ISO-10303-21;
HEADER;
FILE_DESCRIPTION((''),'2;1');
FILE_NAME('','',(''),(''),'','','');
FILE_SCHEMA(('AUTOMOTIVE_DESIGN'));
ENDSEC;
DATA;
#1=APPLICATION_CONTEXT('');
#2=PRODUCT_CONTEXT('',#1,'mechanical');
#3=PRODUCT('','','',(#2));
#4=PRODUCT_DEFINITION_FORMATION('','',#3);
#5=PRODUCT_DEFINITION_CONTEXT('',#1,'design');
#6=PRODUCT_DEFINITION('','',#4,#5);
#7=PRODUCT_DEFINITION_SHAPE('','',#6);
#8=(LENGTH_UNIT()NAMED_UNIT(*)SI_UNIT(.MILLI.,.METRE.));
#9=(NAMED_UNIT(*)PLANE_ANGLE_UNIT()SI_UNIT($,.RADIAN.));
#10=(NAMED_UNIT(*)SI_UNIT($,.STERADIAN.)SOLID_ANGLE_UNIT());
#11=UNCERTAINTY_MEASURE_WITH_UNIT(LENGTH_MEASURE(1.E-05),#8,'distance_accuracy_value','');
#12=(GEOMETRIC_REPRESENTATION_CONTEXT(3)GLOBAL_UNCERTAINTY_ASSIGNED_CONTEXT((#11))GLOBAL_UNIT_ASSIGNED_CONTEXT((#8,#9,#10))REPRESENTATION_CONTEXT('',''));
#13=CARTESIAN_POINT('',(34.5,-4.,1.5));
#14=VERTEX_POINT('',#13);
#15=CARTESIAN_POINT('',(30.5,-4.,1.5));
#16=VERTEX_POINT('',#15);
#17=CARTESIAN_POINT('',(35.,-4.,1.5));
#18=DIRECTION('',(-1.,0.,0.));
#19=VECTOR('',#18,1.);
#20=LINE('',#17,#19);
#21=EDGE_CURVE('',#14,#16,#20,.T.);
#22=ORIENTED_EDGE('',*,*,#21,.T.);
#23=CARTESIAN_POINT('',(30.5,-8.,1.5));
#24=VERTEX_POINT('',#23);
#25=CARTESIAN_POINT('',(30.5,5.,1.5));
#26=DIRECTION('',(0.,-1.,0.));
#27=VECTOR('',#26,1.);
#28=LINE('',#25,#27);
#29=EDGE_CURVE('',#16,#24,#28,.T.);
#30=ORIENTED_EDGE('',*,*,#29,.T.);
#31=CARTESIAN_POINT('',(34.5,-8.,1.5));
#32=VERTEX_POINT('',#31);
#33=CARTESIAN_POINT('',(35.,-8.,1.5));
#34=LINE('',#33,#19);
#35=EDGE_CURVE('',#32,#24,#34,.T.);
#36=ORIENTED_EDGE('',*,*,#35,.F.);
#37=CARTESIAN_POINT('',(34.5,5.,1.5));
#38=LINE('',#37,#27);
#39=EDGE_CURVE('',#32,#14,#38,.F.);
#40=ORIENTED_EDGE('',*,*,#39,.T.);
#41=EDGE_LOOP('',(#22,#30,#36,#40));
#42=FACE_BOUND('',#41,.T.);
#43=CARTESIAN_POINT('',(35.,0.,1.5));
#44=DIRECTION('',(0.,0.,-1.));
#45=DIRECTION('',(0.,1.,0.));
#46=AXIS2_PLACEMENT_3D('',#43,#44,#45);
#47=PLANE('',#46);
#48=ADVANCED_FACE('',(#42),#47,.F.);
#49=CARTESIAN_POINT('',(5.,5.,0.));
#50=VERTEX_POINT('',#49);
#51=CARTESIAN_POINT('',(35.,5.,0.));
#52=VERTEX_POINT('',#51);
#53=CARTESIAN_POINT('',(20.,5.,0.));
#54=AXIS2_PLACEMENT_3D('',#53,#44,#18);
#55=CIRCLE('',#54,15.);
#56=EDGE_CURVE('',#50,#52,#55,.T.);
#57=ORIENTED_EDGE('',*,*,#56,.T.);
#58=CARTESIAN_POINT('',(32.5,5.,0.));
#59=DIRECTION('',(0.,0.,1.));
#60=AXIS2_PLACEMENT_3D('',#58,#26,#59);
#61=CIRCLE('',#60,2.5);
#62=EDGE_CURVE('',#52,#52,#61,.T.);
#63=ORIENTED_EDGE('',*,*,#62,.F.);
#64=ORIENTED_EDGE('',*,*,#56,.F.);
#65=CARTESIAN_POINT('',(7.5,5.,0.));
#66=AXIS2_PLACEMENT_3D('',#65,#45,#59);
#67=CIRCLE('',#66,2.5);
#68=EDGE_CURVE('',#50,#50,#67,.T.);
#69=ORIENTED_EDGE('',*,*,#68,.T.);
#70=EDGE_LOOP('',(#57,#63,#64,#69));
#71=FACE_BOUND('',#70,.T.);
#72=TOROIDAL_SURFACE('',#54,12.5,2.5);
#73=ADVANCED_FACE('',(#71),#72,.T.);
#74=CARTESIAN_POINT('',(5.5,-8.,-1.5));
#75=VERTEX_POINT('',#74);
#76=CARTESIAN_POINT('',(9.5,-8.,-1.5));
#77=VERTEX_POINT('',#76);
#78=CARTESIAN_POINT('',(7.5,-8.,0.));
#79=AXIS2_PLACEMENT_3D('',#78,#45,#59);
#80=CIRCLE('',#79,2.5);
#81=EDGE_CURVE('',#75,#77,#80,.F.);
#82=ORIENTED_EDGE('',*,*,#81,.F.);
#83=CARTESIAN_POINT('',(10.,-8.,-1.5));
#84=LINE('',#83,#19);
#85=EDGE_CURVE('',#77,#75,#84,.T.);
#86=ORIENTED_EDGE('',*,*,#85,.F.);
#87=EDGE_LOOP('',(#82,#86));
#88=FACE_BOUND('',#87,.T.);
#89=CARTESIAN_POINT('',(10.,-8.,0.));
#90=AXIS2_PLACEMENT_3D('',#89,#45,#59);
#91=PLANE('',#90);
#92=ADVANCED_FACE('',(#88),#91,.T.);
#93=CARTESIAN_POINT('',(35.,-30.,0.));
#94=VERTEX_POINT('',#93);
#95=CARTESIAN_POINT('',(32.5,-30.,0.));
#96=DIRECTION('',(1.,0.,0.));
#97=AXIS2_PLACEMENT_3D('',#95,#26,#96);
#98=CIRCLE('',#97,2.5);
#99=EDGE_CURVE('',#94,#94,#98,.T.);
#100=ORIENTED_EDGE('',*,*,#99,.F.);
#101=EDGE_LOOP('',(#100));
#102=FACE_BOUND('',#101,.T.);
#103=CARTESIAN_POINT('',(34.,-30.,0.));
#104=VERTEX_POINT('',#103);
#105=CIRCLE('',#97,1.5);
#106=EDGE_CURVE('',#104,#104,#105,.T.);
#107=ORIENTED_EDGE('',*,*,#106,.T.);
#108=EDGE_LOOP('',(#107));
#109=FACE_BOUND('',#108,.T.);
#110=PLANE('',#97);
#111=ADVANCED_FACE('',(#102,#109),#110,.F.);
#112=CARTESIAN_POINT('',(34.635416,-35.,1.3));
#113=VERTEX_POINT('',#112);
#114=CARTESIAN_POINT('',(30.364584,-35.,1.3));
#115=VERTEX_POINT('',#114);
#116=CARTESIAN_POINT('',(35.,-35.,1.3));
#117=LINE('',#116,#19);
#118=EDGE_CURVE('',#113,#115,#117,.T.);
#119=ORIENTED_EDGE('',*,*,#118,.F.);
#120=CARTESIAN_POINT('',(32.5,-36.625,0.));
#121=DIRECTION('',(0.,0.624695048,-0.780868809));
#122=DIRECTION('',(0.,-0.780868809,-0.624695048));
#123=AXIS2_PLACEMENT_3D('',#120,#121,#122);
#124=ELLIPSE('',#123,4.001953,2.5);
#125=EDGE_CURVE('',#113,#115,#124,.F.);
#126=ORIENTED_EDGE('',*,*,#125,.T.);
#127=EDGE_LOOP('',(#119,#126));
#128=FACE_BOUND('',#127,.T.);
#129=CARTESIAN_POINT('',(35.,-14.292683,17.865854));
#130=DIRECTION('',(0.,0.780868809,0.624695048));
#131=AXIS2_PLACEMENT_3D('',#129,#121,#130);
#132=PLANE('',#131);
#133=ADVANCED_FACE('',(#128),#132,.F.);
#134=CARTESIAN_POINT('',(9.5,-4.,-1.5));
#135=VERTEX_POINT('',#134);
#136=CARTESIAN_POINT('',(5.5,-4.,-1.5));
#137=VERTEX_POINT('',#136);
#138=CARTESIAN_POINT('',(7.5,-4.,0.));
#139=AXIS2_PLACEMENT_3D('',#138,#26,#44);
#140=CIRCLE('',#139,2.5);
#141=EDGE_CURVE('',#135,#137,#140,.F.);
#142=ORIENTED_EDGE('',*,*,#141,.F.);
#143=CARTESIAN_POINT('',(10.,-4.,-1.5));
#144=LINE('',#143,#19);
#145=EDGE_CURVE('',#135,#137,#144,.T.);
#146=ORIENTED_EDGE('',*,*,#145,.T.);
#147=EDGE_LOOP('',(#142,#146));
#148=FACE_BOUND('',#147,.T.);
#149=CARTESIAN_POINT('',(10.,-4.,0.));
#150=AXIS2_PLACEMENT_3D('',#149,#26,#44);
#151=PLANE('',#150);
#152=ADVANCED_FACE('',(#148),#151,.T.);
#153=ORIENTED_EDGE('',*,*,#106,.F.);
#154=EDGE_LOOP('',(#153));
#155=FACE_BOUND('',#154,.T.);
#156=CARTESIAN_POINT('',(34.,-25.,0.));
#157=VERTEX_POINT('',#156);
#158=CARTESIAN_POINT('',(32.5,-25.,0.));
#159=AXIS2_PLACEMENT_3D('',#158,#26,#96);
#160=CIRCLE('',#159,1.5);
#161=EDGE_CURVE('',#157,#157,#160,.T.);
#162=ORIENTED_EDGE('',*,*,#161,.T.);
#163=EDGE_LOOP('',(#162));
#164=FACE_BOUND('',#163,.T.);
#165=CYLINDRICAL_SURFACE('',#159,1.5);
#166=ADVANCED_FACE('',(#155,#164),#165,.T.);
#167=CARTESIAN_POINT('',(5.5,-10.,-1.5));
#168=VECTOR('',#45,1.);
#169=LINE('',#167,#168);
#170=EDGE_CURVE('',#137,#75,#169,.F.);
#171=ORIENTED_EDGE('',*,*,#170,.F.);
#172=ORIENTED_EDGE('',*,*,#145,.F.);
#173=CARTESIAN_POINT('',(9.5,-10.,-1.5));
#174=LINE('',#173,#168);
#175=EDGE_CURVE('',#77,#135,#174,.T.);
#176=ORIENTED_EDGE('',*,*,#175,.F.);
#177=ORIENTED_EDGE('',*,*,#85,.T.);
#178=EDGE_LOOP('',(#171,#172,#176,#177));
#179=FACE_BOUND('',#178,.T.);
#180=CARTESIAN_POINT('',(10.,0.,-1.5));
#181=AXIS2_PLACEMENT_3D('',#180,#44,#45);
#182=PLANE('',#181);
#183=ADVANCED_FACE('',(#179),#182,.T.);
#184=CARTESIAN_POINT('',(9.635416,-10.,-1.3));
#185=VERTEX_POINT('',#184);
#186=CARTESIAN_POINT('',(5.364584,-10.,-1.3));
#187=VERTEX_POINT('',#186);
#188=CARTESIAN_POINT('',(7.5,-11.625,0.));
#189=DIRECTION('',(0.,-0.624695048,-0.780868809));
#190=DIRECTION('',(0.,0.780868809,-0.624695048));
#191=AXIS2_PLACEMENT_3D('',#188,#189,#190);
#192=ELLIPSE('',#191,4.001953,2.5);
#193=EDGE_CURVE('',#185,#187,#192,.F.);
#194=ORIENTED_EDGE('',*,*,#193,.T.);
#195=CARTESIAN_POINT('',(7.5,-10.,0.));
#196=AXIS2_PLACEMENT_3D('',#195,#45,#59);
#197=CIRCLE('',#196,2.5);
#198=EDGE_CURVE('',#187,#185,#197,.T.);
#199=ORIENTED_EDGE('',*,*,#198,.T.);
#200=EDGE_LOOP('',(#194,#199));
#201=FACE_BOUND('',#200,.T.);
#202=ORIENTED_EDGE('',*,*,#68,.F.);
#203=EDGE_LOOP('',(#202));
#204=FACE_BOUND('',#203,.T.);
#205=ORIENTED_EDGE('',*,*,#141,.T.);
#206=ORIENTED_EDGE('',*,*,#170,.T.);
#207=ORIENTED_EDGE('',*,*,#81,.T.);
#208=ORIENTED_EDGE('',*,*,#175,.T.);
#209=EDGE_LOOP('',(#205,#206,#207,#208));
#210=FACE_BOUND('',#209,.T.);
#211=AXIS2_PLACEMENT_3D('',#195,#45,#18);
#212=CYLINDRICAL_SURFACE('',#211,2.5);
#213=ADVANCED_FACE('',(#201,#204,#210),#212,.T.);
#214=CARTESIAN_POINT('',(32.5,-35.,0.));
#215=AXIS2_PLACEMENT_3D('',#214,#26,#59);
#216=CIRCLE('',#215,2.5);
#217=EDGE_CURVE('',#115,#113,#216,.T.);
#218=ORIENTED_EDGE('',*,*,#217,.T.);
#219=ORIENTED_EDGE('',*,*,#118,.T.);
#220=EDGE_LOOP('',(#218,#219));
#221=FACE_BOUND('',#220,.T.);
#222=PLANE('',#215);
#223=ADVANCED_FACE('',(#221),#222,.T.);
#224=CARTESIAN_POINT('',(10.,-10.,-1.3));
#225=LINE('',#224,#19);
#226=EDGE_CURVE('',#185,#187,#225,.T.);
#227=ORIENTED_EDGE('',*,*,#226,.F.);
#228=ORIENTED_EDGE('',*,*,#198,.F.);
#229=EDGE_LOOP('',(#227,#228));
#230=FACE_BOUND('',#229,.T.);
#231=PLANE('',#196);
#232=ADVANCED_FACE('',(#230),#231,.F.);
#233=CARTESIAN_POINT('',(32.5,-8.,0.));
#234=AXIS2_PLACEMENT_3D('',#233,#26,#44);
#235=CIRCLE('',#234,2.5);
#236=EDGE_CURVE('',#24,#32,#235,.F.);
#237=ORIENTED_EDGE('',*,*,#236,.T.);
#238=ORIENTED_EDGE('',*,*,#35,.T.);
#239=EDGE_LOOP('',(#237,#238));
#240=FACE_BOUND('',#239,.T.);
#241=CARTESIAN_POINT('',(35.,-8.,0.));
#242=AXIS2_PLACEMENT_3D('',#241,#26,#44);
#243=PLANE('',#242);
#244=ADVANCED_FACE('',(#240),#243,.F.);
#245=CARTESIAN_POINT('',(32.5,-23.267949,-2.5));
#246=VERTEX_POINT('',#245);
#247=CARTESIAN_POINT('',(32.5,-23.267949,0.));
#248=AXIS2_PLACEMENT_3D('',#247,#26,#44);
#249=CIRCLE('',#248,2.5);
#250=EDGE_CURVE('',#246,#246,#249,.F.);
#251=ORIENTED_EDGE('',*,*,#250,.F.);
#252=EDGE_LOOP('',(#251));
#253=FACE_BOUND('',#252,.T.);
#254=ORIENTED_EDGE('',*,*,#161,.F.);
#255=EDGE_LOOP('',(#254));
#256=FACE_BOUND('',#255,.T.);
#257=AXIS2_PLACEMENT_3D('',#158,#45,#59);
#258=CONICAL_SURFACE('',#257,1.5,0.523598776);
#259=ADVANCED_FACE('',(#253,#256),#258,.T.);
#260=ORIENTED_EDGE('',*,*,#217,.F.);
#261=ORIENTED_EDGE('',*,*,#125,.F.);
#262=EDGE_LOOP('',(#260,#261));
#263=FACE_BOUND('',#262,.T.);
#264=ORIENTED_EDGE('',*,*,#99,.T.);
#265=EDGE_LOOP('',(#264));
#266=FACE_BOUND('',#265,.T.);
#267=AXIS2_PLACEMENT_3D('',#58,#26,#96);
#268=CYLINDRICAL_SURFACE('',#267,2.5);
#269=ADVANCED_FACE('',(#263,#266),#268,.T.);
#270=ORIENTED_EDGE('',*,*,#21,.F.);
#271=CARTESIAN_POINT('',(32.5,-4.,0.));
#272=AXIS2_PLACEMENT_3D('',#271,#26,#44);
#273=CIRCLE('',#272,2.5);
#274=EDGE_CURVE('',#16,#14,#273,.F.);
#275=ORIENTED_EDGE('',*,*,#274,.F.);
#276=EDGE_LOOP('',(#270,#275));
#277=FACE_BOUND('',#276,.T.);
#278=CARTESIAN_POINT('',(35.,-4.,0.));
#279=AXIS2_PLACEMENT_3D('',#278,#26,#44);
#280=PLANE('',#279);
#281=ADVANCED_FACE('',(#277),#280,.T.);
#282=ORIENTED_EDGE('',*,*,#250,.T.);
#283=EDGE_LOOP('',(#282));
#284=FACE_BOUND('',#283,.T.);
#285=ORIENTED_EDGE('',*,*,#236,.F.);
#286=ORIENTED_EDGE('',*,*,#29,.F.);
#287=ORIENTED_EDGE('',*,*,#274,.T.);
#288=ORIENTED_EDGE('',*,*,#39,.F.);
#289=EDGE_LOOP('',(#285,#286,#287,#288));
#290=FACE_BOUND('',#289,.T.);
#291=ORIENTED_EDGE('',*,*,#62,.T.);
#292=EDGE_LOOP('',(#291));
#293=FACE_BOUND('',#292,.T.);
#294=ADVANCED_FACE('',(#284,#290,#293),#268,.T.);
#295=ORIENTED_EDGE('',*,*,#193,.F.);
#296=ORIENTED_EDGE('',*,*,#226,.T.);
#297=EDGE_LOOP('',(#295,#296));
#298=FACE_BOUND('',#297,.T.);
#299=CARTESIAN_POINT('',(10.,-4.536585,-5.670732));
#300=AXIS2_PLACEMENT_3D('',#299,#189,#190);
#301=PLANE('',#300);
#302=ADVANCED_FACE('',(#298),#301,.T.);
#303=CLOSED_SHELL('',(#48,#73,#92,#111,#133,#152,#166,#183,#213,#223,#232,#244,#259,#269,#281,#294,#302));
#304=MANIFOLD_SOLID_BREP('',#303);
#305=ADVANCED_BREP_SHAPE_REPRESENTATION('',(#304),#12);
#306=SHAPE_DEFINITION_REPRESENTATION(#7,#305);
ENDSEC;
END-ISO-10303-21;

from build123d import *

# Parameters (mm, degrees)
SKETCH_3_R          = 2.5
SKETCH_4_W          = 7.512886461
SKETCH_4_H          = 4
CUT_EXTRUDE_1_DEPTH = 10
CUT_EXTRUDE_START   = 10
SKETCH_4_3_W        = 9.374325773
SKETCH_4_3_H        = 4
CUT_EXTRUDE_2_DEPTH = 40.56056908
CUT_EXTRUDE_START_2 = -5
SKETCH_5_R          = 2.5
SKETCH_5_R_2        = 1.5
CUT_EXTRUDE_3_DEPTH = 5
CHAMFER_1_SIZE2     = 1
CHAMFER_1_SIZE      = 1.732050808


with BuildPart() as part:
    # 스윕1: sweep along a path in 스케치2
    with BuildLine(Plane.XY) as sweep_1_path:
        Line((7.5, -10), (7.5, 5))
        ThreePointArc((7.5, 5), (20, 17.5), (32.5, 5))
        Line((32.5, 5), (32.5, -35))
    # 스케치3 → 스윕1 (sweep)
    with BuildSketch(Plane(origin=(0, 0, 0), x_dir=(1, 0, 0), z_dir=(0, 1, 0))):
        with Locations((7.5, 0)):
            Circle(SKETCH_3_R)
    sweep(path=sweep_1_path.line)

    # 스케치4 → 컷-돌출1 (cut)
    with BuildSketch(Plane(origin=(0, 0, 0), x_dir=(0, 0, -1), z_dir=(1, 0, 0))):
        with Locations((5.256443231, -6)):
            Rectangle(SKETCH_4_W, SKETCH_4_H)
        Polygon((2.5, -10), (2.5, -8.5), (1.3, -10), align=None)
    extrude(amount=CUT_EXTRUDE_1_DEPTH, mode=Mode.SUBTRACT)

    # 스케치4<3> → 컷-돌출2 (cut, through all)
    with BuildSketch(Plane(origin=(0, 0, 0), x_dir=(0, 0, -1), z_dir=(1, 0, 0)).offset(CUT_EXTRUDE_START)):
        with Locations((-6.187162887, -6)):
            Rectangle(SKETCH_4_3_W, SKETCH_4_3_H)
        Polygon((-1.3, -35), (-2.5, -35), (-2.5, -33.5), align=None)
    extrude(amount=CUT_EXTRUDE_2_DEPTH, mode=Mode.SUBTRACT)

    # 스케치5 → 컷-돌출3 (cut)
    with BuildSketch(Plane.XZ.offset(35).offset(CUT_EXTRUDE_START_2)):
        with Locations((32.5, 0)):
            Circle(SKETCH_5_R)
        with Locations((32.5, 0)):
            Circle(SKETCH_5_R_2, mode=Mode.SUBTRACT)
    extrude(amount=-CUT_EXTRUDE_3_DEPTH, mode=Mode.SUBTRACT)

    # 모따기1
    chamfer_1_edges = [part.edges().sort_by_distance(p)[0] for p in [
        (35, -25, 0),
    ]]
    chamfer_1_side = [part.faces().sort_by_distance(p)[0] for p in [
        (35, -24.98, 0),
    ]]
    chamfer(chamfer_1_edges, length=CHAMFER_1_SIZE - 0.0001, length2=CHAMFER_1_SIZE2 - 0.0001, reference=chamfer_1_side[0])  # a hair under: the kernel refuses the full size


solid = part.part
